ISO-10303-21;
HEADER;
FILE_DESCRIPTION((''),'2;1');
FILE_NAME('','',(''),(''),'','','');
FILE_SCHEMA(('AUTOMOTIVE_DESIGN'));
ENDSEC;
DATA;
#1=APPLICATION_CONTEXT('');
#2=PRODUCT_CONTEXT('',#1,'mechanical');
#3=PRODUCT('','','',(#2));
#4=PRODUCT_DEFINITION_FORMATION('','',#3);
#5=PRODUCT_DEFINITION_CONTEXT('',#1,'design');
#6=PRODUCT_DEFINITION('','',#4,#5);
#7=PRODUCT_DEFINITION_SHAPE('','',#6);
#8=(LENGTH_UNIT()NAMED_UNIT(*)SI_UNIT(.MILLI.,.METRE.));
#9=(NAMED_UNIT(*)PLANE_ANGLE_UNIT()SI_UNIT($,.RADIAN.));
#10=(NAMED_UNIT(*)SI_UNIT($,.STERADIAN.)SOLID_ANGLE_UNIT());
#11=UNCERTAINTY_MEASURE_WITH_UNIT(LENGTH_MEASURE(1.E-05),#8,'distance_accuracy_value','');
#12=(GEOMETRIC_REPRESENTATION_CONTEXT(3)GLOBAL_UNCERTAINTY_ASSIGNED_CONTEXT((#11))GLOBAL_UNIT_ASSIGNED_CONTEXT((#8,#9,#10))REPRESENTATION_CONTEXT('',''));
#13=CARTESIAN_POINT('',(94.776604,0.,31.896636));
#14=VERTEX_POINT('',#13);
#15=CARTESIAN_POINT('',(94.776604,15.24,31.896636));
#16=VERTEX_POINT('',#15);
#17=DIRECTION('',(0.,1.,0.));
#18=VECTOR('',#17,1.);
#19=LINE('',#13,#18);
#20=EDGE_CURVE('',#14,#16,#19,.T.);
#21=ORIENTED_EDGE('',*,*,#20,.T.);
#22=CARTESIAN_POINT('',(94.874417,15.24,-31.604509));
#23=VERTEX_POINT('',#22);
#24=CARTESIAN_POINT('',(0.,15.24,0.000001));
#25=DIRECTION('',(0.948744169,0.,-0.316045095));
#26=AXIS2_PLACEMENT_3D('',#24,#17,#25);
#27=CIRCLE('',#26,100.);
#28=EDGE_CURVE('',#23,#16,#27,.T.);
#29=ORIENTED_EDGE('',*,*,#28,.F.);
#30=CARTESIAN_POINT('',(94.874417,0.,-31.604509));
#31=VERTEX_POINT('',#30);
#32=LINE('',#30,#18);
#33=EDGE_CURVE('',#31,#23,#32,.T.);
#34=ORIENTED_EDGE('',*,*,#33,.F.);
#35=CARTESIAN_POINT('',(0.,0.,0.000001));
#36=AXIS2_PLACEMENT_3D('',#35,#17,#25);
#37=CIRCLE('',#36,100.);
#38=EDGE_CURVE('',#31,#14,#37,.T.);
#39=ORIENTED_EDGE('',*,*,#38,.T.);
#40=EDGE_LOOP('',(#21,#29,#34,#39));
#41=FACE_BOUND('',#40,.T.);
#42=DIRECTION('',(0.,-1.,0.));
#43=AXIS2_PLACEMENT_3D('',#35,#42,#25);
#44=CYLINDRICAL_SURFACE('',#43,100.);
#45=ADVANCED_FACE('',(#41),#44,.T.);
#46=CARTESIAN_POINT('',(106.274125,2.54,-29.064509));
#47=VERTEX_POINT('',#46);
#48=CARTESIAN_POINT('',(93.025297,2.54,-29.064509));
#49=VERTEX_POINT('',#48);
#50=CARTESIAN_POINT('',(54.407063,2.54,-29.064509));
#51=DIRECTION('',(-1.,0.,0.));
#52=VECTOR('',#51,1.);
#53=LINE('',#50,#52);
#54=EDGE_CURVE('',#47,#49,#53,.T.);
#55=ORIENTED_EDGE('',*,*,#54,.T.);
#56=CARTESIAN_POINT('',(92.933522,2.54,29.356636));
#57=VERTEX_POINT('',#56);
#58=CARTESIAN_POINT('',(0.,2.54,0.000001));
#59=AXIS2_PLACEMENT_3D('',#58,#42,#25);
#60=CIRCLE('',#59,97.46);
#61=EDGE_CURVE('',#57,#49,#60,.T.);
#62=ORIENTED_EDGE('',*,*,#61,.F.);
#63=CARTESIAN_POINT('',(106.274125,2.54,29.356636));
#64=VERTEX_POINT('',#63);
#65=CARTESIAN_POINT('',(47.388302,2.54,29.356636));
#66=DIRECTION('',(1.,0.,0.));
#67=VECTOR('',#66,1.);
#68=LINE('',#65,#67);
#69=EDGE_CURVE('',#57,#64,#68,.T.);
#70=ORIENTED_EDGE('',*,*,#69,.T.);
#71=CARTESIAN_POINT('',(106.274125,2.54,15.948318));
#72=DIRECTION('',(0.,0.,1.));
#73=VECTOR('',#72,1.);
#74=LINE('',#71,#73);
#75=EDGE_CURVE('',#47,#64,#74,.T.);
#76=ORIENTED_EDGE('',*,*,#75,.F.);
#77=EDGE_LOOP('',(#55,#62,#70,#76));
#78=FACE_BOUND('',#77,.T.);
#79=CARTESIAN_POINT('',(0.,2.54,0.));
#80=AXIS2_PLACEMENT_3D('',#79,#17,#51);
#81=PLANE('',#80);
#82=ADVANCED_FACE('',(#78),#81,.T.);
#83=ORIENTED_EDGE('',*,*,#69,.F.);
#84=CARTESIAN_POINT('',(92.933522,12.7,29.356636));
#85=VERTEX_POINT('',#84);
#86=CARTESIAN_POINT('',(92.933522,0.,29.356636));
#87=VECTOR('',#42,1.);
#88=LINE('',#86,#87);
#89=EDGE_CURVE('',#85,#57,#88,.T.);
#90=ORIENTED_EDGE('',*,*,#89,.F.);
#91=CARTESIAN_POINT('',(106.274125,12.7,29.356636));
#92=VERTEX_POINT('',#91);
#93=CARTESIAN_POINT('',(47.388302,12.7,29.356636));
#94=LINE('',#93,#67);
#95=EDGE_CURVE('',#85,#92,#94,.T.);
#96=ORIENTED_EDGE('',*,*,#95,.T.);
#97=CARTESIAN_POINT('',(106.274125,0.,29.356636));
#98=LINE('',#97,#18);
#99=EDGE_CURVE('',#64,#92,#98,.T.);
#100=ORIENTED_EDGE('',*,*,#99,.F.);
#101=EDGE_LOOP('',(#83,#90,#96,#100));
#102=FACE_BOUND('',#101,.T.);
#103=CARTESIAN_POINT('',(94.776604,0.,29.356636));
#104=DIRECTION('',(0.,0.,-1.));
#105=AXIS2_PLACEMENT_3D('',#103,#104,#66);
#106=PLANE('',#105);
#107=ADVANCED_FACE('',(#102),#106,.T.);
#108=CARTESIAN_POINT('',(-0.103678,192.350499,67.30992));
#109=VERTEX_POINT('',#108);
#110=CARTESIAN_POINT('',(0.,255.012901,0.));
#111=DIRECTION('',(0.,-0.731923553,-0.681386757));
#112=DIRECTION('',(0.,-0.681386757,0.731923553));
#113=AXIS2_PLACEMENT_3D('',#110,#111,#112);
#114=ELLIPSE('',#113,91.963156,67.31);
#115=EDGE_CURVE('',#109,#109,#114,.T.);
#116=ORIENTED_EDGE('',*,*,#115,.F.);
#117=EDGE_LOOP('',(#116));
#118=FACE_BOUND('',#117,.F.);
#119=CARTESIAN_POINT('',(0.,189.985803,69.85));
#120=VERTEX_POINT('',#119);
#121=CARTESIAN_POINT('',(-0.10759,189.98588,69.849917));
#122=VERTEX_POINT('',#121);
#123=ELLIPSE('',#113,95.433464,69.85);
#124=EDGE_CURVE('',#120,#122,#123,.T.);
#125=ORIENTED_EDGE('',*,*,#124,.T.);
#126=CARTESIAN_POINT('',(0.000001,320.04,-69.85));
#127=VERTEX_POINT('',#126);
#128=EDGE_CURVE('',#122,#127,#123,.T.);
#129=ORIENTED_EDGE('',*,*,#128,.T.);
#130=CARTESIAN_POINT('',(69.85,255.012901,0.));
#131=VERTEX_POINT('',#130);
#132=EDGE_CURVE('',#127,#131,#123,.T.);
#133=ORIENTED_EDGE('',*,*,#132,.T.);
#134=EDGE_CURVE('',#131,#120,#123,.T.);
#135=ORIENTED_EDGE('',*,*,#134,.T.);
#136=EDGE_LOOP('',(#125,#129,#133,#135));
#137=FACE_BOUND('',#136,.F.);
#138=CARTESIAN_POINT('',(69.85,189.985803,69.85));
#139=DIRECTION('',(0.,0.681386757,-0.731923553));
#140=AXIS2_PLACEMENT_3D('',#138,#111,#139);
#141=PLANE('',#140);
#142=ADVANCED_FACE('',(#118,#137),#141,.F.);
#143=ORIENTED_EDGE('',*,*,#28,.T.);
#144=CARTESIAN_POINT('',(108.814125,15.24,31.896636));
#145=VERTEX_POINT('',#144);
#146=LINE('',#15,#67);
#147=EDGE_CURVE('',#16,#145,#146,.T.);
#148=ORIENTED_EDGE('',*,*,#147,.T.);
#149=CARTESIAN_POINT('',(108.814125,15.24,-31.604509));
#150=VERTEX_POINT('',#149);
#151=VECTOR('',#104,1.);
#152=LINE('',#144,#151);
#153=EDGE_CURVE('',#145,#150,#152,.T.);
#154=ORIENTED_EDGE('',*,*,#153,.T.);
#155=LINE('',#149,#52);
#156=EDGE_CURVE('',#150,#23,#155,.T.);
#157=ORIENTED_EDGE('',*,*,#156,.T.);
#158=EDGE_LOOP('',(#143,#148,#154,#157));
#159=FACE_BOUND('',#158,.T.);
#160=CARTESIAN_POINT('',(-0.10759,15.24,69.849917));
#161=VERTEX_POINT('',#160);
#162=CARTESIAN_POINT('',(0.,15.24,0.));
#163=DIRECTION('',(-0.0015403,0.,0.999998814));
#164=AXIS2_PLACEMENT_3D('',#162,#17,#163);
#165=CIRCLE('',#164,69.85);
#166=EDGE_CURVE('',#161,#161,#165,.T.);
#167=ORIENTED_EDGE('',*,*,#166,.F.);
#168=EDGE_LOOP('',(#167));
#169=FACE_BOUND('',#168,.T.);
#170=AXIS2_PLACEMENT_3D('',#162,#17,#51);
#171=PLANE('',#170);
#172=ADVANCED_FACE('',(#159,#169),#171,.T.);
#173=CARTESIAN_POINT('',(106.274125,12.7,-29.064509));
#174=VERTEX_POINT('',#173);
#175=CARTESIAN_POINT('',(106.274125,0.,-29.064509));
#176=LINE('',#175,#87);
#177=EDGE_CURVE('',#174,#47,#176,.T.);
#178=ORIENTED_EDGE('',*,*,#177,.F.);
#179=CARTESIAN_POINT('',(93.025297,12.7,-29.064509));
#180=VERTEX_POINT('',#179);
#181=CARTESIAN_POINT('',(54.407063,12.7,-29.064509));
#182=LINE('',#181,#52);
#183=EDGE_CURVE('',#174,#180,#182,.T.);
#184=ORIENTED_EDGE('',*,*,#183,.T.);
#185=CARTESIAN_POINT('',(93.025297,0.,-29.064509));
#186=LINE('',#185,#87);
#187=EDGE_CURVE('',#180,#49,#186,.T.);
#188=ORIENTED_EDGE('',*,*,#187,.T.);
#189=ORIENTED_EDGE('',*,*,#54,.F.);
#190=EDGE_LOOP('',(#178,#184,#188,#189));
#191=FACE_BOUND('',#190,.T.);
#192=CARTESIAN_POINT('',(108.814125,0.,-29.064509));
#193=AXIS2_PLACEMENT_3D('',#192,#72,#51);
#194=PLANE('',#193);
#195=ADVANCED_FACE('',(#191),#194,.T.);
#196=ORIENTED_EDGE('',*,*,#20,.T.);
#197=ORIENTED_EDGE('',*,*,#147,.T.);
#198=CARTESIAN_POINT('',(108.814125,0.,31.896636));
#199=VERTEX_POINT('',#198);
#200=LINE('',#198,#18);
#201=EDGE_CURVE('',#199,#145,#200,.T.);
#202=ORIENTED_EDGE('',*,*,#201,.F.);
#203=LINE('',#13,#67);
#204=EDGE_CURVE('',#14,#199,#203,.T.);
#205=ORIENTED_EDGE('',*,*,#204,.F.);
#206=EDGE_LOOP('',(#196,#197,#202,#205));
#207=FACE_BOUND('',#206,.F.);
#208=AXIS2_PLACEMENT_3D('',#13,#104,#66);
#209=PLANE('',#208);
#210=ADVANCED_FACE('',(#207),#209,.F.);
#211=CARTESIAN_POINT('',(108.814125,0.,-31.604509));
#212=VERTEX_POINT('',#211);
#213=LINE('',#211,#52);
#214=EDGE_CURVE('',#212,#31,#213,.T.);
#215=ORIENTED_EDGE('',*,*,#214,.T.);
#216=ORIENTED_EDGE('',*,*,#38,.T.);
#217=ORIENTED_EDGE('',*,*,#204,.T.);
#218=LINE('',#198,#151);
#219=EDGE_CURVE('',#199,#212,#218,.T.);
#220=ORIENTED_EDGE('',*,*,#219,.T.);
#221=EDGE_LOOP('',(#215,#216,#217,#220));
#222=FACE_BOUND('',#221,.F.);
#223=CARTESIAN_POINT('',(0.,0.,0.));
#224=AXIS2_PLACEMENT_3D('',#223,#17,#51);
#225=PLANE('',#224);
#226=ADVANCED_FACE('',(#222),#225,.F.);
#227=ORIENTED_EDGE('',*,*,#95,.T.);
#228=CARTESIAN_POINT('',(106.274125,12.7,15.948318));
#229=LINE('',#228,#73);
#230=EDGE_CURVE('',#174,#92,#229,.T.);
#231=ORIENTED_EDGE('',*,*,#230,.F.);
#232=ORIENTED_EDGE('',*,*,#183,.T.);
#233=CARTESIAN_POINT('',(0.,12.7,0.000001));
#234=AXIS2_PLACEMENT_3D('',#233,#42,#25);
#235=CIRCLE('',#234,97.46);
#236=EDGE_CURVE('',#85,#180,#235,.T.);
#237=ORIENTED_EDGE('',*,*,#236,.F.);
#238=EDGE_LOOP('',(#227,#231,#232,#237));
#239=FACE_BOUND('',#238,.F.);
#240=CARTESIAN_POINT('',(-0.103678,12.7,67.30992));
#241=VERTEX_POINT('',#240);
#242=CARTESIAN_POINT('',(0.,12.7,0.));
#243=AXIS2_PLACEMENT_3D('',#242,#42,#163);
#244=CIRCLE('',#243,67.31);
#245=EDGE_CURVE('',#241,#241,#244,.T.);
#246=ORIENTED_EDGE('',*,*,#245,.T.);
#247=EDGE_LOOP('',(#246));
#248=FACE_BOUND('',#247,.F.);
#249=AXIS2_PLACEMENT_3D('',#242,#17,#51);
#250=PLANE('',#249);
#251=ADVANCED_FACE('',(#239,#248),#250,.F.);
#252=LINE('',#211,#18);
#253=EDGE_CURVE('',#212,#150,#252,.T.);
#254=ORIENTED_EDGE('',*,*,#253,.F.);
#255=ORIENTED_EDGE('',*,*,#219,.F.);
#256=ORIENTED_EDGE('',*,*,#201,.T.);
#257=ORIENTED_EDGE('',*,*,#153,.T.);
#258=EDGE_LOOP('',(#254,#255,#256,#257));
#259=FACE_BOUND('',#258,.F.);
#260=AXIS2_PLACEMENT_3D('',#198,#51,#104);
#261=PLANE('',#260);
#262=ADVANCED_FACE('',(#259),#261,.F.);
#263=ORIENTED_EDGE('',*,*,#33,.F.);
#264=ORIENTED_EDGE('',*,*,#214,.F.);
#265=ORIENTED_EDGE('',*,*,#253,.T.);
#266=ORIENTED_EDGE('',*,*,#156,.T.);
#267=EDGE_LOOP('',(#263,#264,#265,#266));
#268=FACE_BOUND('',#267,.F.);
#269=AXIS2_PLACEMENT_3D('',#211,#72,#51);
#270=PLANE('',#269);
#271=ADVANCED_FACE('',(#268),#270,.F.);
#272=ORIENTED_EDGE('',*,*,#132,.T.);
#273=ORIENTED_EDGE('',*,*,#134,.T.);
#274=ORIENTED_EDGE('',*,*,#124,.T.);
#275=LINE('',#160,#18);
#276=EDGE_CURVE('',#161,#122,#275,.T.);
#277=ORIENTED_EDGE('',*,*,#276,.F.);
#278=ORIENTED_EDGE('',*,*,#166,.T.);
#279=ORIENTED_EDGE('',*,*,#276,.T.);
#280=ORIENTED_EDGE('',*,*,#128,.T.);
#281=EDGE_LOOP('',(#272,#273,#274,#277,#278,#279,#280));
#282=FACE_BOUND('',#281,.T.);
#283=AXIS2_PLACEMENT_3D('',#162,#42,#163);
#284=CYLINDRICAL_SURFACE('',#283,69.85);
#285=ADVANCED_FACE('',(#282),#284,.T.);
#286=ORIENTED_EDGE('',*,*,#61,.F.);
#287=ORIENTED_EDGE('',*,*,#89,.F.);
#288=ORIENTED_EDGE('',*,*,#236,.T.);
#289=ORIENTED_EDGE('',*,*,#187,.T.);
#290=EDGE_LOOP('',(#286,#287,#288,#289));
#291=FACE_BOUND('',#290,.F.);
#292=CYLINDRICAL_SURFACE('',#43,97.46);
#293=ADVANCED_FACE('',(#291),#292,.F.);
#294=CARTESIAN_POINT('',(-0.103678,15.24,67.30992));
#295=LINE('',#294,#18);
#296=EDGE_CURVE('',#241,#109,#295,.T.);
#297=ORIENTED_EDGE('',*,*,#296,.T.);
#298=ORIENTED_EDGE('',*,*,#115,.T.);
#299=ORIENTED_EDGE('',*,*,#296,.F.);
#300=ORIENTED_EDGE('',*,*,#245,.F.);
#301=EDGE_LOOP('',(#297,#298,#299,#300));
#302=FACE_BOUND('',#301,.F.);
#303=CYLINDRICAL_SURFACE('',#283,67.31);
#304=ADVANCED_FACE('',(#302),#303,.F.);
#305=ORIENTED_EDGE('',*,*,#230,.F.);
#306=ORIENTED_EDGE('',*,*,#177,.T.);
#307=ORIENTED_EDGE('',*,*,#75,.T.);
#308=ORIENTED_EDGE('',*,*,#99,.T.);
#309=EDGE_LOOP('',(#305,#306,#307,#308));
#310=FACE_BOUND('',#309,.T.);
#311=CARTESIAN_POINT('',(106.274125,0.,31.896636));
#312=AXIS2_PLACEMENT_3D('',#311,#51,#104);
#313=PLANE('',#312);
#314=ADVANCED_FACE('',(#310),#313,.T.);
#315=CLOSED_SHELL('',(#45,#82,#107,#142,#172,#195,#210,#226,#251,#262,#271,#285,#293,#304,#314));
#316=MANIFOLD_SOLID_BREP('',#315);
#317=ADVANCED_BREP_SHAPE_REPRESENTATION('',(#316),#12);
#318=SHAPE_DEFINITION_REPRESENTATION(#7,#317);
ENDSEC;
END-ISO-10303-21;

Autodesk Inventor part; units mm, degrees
ref_plane "YZ Plane" through (0, 0, 0) normal (1, 0, 0) x (0, 1, 0)
ref_plane "XZ Plane" through (0, 0, 0) normal (0, 1, 0) x (-1, 0, 0)
ref_plane "XY Plane" through (0, 0, 0) normal (0, 0, 1) x (1, 0, 0)
sketch "Sketch1" plane through (0, 0, 0) normal (0, 1, 0) x (-1, 0, 0)
  circle A0 centre (0, 0) radius 100
  line L0 (-76.20071, 31.896636) -> (-108.814125, 31.896636)
  line L1 (-108.814125, 31.896636) -> (-108.814125, -31.604509)
  line L2 (-108.814125, -31.604509) -> (-76.20071, -31.604509)
  line L3 (-76.20071, -31.604509) -> (-76.20071, 31.896636)
  point P0 (-94.874417, -31.604509)
  point P1 (-94.776604, 31.896636)
  dimension "d0" = 200
sketch "Sketch1 outline for Extrusion1" plane through (0, 0, 0) normal (0, 1, 0) x (-1, 0, 0)
  line L0 (-94.776604, 31.896636) -> (-108.814125, 31.896636)
  line L1 (-108.814125, 31.896636) -> (-108.814125, -31.604509)
  line L2 (-108.814125, -31.604509) -> (-94.874417, -31.604509)
  arc A0 (-94.874417, -31.604509) -> (-94.776604, 31.896636) centre (0, 0) ccw
extrude "Extrusion1" add sketch "Sketch1 outline for Extrusion1" along normal blind 15.24
sketch "Sketch2" plane through (0, 15.24, 0) normal (0, 1, 0) x (-0.0015403, 0, 0.9999988)
  circle A0 centre (0, 0) radius 69.85
  dimension "d3" = 139.7
sketch "Sketch2 outline for Extrusion2" plane through (0, 15.24, 0) normal (0, 1, 0) x (-0.0015403, 0, 0.9999988)
  circle A0 centre (0, 0) radius 69.85
extrude "Extrusion2" add sketch "Sketch2 outline for Extrusion2" along normal blind 304.8
ref_plane "Work Plane1" through (69.85, 15.24, 0) normal (1, 0, 0) x (0, 0, -1)
sketch "Sketch3" plane through (69.85, 15.24, 0) normal (1, 0, 0) x (0, 0, -1)
  line L0 (-69.85, 0) -> (-69.85, 304.8)
  line L1 (69.85, 304.8) -> (-69.85, 304.8)
  line L2 (-69.85, 174.745803) -> (69.85, 304.8)
  line L3 (69.85, 304.8) -> (-69.85, 304.8)
  line L4 (-69.85, 304.8) -> (-69.85, 174.745803)
  point P0 (0, -15.24)
sketch "Sketch3 outline for Extrusion3" plane through (69.85, 15.24, 0) normal (1, 0, 0) x (0, 0, -1)
  line L0 (-69.85, 174.745803) -> (69.85, 304.8)
  line L1 (-69.85, 304.8) -> (-69.85, 174.745803)
  line L2 (69.85, 304.8) -> (-69.85, 304.8)
extrude "Extrusion3" cut sketch "Sketch3 outline for Extrusion3" against normal through all
shell "Shell1" thickness 2.54 removed faces 1 at (-23.178976, 247.634165, 7.925999)
properties part number "OCAMS"
